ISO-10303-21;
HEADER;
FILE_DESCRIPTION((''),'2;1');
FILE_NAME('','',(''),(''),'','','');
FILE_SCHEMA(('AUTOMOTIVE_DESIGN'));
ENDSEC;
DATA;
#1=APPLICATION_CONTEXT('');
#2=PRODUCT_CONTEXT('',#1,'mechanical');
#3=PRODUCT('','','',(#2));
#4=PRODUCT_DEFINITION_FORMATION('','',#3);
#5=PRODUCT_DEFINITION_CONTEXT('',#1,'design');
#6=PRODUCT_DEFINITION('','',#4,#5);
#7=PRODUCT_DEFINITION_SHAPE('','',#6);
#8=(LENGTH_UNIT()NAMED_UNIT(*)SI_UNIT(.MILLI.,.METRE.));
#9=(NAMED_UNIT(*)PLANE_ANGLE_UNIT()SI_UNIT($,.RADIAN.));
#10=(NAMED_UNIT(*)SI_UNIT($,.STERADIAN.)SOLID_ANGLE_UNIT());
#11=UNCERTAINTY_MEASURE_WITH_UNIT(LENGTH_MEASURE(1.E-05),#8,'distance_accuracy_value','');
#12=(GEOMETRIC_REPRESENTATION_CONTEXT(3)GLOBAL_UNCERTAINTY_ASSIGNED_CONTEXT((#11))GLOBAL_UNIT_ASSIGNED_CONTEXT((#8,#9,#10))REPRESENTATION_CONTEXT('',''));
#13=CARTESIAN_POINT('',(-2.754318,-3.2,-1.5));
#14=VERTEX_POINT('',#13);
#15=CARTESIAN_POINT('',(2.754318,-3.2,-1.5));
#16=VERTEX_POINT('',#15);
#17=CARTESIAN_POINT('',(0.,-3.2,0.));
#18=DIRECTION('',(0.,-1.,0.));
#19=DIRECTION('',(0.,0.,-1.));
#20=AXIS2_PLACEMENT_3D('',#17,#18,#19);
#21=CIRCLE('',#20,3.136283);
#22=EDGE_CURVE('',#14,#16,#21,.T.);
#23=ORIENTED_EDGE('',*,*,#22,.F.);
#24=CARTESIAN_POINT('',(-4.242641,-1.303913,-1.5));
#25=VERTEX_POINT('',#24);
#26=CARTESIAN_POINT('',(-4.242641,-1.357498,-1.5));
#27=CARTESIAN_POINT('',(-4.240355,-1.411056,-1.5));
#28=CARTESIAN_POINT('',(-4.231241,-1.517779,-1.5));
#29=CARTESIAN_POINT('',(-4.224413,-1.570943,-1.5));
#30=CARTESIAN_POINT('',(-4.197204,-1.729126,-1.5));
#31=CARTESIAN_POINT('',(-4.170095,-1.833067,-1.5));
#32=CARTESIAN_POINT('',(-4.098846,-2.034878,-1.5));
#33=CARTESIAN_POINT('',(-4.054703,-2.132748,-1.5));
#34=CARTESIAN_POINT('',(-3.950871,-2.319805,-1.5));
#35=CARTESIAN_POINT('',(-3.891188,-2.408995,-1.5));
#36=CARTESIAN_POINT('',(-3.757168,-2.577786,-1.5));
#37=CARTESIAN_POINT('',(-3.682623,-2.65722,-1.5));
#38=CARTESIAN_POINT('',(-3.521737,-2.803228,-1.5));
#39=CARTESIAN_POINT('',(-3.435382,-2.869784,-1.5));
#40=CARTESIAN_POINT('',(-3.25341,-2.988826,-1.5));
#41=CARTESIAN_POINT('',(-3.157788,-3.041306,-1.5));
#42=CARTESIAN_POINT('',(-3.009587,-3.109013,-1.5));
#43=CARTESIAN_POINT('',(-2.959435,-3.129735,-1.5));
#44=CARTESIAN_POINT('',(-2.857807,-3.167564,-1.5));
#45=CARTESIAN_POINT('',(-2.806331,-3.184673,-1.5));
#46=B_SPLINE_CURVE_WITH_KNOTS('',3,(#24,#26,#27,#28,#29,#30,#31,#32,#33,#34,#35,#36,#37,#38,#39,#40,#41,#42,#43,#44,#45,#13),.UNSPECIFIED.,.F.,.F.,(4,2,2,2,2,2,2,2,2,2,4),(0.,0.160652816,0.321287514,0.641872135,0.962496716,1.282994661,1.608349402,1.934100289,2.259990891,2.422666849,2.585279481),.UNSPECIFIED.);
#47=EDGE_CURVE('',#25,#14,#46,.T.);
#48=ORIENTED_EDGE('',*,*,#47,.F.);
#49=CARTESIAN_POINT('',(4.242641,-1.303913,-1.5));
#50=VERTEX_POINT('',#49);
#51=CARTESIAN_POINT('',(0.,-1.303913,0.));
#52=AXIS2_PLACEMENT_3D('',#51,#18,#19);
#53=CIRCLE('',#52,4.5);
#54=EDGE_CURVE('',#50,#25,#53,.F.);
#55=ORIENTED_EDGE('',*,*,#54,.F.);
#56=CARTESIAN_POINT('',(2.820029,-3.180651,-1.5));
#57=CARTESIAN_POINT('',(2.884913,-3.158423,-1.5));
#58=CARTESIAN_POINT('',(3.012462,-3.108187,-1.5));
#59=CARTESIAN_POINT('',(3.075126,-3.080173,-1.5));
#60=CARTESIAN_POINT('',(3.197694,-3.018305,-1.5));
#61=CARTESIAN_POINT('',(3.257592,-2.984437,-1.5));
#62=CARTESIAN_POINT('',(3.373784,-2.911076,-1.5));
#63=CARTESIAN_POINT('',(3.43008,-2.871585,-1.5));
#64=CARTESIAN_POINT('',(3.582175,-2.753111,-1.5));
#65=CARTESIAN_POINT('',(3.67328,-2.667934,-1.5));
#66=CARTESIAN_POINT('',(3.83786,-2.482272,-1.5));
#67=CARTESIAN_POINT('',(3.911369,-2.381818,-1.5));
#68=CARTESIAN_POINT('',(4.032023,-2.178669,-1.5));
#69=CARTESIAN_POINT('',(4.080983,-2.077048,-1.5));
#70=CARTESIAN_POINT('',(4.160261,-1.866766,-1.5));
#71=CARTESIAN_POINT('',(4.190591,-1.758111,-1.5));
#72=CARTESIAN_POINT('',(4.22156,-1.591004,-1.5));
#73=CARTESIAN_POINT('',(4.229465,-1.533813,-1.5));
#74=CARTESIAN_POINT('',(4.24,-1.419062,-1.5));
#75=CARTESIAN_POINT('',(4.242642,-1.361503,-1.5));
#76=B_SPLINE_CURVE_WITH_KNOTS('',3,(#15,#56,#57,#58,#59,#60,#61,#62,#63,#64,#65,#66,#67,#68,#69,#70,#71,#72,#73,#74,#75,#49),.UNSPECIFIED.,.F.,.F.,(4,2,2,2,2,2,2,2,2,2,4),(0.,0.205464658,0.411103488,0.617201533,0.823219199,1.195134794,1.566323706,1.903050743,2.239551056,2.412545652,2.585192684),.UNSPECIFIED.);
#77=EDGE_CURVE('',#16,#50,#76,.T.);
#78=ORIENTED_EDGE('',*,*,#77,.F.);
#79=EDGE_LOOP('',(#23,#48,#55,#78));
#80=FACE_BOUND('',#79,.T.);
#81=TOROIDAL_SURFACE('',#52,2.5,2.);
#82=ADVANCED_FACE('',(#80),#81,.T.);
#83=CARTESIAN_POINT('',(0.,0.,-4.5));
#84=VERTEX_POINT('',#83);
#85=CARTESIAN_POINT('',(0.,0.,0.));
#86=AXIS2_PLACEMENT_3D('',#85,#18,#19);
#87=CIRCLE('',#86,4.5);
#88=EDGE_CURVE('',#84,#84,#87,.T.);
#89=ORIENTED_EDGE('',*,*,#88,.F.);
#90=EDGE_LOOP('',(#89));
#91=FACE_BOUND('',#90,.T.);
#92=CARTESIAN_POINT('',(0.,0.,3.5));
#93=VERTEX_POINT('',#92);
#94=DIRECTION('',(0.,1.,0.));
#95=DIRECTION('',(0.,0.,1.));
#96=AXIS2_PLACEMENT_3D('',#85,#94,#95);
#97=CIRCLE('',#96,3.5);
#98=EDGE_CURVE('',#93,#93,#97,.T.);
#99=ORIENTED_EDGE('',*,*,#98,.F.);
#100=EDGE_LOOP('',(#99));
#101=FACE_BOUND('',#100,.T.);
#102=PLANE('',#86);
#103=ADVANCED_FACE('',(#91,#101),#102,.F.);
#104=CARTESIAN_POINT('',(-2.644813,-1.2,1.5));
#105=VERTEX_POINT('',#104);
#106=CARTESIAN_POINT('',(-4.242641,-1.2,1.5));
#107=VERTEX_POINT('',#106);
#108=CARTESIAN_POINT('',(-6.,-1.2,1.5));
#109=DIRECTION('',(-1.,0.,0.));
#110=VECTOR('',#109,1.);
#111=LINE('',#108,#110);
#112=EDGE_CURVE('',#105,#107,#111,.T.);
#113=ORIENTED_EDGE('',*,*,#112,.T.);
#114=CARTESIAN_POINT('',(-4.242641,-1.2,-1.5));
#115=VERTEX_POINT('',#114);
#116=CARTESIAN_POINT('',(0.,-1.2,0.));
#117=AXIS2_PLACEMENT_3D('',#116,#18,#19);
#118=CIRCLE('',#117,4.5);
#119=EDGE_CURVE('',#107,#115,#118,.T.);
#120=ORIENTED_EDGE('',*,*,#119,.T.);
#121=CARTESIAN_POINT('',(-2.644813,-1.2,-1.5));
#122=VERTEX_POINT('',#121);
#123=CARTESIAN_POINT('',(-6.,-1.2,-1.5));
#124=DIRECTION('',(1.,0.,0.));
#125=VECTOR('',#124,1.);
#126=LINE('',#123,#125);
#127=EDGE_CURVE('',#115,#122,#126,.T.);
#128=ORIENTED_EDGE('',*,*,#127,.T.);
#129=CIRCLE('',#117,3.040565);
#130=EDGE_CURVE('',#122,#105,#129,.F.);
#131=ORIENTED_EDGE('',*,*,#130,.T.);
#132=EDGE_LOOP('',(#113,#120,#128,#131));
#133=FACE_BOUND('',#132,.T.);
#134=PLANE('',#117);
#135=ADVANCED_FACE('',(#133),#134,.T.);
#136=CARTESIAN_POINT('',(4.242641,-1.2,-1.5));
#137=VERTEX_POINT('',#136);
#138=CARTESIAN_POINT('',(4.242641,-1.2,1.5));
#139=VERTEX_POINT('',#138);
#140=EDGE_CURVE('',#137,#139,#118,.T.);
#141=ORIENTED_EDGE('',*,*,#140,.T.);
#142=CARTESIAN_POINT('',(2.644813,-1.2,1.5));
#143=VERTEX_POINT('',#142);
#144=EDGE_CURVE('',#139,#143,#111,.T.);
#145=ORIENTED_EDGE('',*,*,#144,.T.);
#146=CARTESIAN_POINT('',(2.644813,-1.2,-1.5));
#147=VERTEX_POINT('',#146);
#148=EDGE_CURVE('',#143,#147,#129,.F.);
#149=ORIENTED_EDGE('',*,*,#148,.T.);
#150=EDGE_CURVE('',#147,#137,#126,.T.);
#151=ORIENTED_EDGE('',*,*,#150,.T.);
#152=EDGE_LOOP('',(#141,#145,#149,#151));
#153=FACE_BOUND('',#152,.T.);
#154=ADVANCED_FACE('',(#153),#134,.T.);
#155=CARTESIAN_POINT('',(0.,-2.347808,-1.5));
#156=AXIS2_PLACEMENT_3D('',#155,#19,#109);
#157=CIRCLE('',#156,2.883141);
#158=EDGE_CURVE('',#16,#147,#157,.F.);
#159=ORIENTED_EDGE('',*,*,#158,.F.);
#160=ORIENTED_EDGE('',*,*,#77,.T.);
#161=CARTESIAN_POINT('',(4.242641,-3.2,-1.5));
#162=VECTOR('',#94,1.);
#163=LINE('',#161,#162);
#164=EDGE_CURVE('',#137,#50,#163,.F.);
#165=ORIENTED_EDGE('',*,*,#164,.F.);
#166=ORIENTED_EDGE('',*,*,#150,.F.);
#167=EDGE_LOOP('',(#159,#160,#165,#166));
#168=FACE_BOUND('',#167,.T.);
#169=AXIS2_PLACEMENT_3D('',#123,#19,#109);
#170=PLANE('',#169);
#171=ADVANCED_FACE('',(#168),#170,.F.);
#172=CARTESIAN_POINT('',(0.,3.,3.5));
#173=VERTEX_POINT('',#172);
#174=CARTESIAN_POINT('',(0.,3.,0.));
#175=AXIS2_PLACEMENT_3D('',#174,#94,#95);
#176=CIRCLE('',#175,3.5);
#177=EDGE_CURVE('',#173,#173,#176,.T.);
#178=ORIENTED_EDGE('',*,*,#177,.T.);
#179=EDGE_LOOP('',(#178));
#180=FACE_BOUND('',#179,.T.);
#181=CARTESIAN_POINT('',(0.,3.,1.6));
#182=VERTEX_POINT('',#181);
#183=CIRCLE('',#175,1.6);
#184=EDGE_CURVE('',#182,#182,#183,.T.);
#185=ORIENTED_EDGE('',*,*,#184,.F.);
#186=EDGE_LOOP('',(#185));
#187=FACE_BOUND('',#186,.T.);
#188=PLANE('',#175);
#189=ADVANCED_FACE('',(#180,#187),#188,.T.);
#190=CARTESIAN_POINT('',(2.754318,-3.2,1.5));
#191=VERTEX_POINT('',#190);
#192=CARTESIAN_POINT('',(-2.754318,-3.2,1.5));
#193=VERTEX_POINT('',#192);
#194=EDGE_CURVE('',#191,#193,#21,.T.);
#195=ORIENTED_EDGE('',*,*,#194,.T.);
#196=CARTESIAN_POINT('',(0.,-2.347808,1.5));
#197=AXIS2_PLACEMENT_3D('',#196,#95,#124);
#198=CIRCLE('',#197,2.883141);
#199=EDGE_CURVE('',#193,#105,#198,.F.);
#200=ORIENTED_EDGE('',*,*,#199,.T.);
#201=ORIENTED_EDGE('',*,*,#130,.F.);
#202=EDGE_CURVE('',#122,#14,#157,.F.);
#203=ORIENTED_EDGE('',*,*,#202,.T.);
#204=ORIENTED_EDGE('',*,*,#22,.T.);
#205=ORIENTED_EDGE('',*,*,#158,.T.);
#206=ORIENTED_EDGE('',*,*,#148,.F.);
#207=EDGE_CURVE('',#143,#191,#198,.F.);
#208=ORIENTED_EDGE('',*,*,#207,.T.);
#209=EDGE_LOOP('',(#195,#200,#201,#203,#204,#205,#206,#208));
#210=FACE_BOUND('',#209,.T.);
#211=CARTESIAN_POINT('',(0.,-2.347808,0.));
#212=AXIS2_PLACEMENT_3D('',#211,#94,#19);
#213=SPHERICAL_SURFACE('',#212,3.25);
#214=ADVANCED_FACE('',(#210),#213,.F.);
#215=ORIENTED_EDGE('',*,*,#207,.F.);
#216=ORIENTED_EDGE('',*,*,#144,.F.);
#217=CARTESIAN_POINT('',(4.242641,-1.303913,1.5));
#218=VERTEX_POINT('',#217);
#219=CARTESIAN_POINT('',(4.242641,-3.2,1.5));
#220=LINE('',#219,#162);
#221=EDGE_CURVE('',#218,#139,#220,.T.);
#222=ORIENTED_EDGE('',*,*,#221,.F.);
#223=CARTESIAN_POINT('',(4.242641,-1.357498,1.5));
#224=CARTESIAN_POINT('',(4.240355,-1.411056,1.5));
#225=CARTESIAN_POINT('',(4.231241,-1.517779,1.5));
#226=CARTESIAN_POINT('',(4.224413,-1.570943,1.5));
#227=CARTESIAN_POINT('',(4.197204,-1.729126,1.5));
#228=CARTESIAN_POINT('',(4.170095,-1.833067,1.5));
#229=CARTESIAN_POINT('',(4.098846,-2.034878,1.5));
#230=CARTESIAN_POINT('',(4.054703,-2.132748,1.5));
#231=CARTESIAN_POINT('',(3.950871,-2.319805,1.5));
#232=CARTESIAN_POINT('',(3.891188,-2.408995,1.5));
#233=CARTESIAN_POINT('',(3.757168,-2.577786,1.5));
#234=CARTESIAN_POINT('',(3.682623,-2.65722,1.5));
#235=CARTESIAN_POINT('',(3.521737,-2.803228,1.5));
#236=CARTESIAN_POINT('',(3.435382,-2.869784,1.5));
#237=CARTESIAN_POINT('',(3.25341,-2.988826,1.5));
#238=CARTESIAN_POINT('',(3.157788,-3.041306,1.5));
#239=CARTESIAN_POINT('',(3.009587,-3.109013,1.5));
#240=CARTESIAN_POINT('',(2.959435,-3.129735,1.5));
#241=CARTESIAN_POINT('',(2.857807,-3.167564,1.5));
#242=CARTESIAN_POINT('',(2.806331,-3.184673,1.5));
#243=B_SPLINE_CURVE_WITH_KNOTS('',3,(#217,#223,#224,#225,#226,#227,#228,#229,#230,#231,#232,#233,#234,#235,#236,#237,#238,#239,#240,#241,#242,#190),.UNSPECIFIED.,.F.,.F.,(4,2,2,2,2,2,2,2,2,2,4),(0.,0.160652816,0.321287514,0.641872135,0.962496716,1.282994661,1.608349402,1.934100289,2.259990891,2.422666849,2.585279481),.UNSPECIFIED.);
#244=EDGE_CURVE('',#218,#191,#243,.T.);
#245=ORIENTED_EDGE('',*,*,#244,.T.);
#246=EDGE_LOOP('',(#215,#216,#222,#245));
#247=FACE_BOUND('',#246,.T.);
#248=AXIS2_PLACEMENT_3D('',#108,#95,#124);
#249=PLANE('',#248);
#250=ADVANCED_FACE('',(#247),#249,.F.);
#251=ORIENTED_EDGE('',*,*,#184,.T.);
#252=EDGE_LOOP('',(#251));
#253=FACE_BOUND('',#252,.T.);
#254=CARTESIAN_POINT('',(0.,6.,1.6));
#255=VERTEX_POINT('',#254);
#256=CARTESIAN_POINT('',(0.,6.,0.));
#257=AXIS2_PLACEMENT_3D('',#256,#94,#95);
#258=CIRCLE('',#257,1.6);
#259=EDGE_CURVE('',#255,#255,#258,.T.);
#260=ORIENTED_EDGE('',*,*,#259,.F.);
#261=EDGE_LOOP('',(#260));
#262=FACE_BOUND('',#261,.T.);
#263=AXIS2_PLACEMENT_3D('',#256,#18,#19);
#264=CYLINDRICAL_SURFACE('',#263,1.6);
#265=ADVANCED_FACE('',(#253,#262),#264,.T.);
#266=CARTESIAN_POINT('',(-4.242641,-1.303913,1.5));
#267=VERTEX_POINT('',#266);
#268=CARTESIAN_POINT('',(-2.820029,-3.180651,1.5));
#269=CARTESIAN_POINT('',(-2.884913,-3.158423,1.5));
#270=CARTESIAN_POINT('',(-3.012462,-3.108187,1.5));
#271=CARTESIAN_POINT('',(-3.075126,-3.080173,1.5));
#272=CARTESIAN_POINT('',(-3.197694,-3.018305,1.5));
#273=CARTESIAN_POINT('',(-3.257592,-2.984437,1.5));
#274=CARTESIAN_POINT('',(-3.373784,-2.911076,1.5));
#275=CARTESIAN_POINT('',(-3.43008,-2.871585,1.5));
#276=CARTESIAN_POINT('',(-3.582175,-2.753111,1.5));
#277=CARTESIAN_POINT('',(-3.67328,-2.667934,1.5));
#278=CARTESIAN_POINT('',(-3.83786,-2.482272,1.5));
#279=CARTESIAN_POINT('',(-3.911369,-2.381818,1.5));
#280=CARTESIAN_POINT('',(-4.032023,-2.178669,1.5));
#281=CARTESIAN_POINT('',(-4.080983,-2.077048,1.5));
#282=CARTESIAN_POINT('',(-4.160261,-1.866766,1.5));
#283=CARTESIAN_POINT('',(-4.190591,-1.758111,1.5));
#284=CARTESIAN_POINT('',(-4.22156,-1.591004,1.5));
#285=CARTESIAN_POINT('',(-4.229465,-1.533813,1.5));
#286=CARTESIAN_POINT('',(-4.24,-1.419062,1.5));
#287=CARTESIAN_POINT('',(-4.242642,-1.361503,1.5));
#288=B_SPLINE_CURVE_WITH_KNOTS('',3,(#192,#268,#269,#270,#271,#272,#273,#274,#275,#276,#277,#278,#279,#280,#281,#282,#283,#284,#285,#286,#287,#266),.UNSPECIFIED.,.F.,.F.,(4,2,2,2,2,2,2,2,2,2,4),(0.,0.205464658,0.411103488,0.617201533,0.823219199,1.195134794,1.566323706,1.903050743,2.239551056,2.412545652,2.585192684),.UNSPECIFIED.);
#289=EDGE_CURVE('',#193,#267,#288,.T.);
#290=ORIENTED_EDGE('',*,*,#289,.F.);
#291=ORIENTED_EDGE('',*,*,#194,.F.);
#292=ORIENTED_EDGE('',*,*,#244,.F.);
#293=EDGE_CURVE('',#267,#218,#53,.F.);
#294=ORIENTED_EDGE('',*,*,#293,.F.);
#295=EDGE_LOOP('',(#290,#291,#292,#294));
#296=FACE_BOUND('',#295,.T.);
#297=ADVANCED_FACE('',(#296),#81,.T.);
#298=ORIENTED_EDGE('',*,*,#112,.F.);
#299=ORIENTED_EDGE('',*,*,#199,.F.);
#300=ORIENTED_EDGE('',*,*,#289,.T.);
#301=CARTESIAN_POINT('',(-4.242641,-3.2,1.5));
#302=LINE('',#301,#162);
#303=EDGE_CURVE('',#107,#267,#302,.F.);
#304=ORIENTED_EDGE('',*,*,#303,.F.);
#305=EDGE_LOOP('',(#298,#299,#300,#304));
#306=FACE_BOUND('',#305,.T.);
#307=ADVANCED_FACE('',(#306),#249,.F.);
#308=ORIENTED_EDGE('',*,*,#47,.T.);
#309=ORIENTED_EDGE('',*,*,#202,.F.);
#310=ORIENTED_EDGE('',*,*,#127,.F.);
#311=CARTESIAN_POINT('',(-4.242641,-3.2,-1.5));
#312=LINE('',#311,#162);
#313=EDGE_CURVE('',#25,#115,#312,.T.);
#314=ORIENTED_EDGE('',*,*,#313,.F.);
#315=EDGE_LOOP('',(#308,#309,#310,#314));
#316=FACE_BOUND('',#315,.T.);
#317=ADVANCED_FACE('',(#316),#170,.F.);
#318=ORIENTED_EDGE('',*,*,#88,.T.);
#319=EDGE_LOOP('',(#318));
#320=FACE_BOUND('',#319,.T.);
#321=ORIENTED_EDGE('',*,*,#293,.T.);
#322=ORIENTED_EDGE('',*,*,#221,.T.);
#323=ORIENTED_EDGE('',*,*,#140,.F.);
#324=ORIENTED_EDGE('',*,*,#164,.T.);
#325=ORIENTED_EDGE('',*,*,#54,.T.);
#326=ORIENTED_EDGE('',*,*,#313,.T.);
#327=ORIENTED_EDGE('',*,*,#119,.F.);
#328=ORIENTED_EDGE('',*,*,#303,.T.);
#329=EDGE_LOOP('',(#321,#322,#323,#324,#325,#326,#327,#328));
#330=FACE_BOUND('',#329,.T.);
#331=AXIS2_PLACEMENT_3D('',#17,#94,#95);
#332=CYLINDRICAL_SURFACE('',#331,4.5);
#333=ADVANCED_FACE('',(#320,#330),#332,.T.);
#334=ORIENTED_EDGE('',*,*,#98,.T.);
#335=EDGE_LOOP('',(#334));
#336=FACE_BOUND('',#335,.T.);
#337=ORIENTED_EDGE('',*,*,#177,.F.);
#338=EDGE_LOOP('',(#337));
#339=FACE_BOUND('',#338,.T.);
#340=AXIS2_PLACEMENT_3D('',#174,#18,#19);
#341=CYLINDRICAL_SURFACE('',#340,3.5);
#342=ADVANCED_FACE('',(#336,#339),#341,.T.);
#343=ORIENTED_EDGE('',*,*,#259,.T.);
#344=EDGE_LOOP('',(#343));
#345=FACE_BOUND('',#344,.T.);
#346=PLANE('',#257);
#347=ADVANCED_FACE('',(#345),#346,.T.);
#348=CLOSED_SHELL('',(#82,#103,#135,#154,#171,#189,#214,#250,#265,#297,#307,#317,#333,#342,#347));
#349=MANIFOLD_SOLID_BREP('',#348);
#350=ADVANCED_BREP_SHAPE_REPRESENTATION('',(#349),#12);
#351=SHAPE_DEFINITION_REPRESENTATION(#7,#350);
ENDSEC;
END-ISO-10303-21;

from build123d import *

# Parameters (mm, degrees)
SKETCH1_R      = 3.5
BASE_DEPTH     = 3
SKETCH2_R      = 1.6
PEG_DEPTH      = 3
SKETCH5_R      = 4.5
HOLDER_DEPTH   = 3.2
SKETCH8_W      = 12
SKETCH8_H      = 3
CUT_SLOT_DEPTH = 2
FILLET1_R      = 2


with BuildPart() as part:
    # Sketch1 → base (new body)
    with BuildSketch(Plane(origin=(0, 0, 0), x_dir=(1, 0, 0), z_dir=(0, 1, 0))):
        with Locations(Location((0, 0, 0), (0, 0, 270))):
            Circle(SKETCH1_R)
    extrude(amount=BASE_DEPTH)

    # Sketch2 → peg (add)
    with BuildSketch(Plane(origin=(0, 3, 0), x_dir=(1, 0, 0), z_dir=(0, 1, 0))):
        with Locations(Location((0, 0, 0), (0, 0, 270))):
            Circle(SKETCH2_R)
    extrude(amount=PEG_DEPTH)

    # Sketch5 → holder (add)
    with BuildSketch(Plane.XZ):
        with Locations(Location((0, 0, 0), (0, 0, 270))):
            Circle(SKETCH5_R)
    extrude(amount=HOLDER_DEPTH)

    # Sketch6 → Cut-ball (revolve, cut)
    with BuildSketch(Plane(origin=(0, 0, 0), x_dir=(0, 0, -1), z_dir=(1, 0, 0))):
        with BuildLine():
            Line((0, 0.902192429), (0, -5.597807571))
            ThreePointArc((0, -5.597807571), (-3.25, -2.347807571), (0, 0.902192429))
        make_face()
    revolve(axis=Axis((0, 6, 0), (0, -1, 0)), mode=Mode.SUBTRACT)

    # Sketch8 → Cut-slot (cut)
    with BuildSketch(Plane.XZ.offset(3.2)):
        Rectangle(SKETCH8_W, SKETCH8_H)
    extrude(amount=-CUT_SLOT_DEPTH, mode=Mode.SUBTRACT)

    # Fillet1
    # the kernel refuses this fillet: 2 mm, written as the material it takes off along each edge
    with BuildSketch(Plane(origin=(0, -3.2, 0), x_dir=(0, 0, -1), z_dir=(-1, 0, 0))) as fillet1_piece_1:
        with BuildLine():
            CenterArc((2.5, -1.896086641), FILLET1_R, 0, 71.449446556)
            Line((3.136282523, 0), (3.149008174, 0.037921733))
            ThreePointArc((3.149008174, 0.037921733), (3.818141262, 0.04), (4.5, 0.04))
            Line((4.5, 0.04), (4.54, 0))
            Line((4.54, 0), (4.54, -1.896086641))
            Line((4.54, -1.896086641), (4.5, -1.896086641))
        make_face()
    revolve(axis=Axis((0, -3.2, 0), (0, -1, 0)), revolution_arc=130.897979083, mode=Mode.SUBTRACT)
    with BuildSketch(Plane(origin=(0, -3.2, 0), x_dir=(0.7553656278426528, 0, -0.6553035695567931), z_dir=(-0.6553035695567931, 0, -0.7553656278426528))) as fillet1_piece_2:
        with BuildLine():
            CenterArc((2.5, -1.896086641), FILLET1_R, 0, 71.449446556)
            Line((3.136282523, 0), (3.149008174, 0.037921733))
            ThreePointArc((3.149008174, 0.037921733), (3.818141262, 0.04), (4.5, 0.04))
            Line((4.5, 0.04), (4.54, 0))
            Line((4.54, 0), (4.54, -1.896086641))
            Line((4.54, -1.896086641), (4.5, -1.896086641))
        make_face()
    revolve(axis=Axis((0, -3.2, 0), (0, -1, 0)), revolution_arc=261.88534443, mode=Mode.SUBTRACT)
    with BuildSketch(Plane(origin=(0, -3.2, 0), x_dir=(-0.7558765624849457, 0, 0.6547141531125946), z_dir=(0.6547141531125946, 0, 0.7558765624849457))) as fillet1_piece_3:
        with BuildLine():
            CenterArc((2.5, -1.896086641), FILLET1_R, 0, 71.449446556)
            Line((3.136282523, 0), (3.149008174, 0.037921733))
            ThreePointArc((3.149008174, 0.037921733), (3.818141262, 0.04), (4.5, 0.04))
            Line((4.5, 0.04), (4.54, 0))
            Line((4.54, 0), (4.54, -1.896086641))
            Line((4.54, -1.896086641), (4.5, -1.896086641))
        make_face()
    revolve(axis=Axis((0, -3.2, 0), (0, -1, 0)), revolution_arc=130.897979083, mode=Mode.SUBTRACT)


solid = part.part
